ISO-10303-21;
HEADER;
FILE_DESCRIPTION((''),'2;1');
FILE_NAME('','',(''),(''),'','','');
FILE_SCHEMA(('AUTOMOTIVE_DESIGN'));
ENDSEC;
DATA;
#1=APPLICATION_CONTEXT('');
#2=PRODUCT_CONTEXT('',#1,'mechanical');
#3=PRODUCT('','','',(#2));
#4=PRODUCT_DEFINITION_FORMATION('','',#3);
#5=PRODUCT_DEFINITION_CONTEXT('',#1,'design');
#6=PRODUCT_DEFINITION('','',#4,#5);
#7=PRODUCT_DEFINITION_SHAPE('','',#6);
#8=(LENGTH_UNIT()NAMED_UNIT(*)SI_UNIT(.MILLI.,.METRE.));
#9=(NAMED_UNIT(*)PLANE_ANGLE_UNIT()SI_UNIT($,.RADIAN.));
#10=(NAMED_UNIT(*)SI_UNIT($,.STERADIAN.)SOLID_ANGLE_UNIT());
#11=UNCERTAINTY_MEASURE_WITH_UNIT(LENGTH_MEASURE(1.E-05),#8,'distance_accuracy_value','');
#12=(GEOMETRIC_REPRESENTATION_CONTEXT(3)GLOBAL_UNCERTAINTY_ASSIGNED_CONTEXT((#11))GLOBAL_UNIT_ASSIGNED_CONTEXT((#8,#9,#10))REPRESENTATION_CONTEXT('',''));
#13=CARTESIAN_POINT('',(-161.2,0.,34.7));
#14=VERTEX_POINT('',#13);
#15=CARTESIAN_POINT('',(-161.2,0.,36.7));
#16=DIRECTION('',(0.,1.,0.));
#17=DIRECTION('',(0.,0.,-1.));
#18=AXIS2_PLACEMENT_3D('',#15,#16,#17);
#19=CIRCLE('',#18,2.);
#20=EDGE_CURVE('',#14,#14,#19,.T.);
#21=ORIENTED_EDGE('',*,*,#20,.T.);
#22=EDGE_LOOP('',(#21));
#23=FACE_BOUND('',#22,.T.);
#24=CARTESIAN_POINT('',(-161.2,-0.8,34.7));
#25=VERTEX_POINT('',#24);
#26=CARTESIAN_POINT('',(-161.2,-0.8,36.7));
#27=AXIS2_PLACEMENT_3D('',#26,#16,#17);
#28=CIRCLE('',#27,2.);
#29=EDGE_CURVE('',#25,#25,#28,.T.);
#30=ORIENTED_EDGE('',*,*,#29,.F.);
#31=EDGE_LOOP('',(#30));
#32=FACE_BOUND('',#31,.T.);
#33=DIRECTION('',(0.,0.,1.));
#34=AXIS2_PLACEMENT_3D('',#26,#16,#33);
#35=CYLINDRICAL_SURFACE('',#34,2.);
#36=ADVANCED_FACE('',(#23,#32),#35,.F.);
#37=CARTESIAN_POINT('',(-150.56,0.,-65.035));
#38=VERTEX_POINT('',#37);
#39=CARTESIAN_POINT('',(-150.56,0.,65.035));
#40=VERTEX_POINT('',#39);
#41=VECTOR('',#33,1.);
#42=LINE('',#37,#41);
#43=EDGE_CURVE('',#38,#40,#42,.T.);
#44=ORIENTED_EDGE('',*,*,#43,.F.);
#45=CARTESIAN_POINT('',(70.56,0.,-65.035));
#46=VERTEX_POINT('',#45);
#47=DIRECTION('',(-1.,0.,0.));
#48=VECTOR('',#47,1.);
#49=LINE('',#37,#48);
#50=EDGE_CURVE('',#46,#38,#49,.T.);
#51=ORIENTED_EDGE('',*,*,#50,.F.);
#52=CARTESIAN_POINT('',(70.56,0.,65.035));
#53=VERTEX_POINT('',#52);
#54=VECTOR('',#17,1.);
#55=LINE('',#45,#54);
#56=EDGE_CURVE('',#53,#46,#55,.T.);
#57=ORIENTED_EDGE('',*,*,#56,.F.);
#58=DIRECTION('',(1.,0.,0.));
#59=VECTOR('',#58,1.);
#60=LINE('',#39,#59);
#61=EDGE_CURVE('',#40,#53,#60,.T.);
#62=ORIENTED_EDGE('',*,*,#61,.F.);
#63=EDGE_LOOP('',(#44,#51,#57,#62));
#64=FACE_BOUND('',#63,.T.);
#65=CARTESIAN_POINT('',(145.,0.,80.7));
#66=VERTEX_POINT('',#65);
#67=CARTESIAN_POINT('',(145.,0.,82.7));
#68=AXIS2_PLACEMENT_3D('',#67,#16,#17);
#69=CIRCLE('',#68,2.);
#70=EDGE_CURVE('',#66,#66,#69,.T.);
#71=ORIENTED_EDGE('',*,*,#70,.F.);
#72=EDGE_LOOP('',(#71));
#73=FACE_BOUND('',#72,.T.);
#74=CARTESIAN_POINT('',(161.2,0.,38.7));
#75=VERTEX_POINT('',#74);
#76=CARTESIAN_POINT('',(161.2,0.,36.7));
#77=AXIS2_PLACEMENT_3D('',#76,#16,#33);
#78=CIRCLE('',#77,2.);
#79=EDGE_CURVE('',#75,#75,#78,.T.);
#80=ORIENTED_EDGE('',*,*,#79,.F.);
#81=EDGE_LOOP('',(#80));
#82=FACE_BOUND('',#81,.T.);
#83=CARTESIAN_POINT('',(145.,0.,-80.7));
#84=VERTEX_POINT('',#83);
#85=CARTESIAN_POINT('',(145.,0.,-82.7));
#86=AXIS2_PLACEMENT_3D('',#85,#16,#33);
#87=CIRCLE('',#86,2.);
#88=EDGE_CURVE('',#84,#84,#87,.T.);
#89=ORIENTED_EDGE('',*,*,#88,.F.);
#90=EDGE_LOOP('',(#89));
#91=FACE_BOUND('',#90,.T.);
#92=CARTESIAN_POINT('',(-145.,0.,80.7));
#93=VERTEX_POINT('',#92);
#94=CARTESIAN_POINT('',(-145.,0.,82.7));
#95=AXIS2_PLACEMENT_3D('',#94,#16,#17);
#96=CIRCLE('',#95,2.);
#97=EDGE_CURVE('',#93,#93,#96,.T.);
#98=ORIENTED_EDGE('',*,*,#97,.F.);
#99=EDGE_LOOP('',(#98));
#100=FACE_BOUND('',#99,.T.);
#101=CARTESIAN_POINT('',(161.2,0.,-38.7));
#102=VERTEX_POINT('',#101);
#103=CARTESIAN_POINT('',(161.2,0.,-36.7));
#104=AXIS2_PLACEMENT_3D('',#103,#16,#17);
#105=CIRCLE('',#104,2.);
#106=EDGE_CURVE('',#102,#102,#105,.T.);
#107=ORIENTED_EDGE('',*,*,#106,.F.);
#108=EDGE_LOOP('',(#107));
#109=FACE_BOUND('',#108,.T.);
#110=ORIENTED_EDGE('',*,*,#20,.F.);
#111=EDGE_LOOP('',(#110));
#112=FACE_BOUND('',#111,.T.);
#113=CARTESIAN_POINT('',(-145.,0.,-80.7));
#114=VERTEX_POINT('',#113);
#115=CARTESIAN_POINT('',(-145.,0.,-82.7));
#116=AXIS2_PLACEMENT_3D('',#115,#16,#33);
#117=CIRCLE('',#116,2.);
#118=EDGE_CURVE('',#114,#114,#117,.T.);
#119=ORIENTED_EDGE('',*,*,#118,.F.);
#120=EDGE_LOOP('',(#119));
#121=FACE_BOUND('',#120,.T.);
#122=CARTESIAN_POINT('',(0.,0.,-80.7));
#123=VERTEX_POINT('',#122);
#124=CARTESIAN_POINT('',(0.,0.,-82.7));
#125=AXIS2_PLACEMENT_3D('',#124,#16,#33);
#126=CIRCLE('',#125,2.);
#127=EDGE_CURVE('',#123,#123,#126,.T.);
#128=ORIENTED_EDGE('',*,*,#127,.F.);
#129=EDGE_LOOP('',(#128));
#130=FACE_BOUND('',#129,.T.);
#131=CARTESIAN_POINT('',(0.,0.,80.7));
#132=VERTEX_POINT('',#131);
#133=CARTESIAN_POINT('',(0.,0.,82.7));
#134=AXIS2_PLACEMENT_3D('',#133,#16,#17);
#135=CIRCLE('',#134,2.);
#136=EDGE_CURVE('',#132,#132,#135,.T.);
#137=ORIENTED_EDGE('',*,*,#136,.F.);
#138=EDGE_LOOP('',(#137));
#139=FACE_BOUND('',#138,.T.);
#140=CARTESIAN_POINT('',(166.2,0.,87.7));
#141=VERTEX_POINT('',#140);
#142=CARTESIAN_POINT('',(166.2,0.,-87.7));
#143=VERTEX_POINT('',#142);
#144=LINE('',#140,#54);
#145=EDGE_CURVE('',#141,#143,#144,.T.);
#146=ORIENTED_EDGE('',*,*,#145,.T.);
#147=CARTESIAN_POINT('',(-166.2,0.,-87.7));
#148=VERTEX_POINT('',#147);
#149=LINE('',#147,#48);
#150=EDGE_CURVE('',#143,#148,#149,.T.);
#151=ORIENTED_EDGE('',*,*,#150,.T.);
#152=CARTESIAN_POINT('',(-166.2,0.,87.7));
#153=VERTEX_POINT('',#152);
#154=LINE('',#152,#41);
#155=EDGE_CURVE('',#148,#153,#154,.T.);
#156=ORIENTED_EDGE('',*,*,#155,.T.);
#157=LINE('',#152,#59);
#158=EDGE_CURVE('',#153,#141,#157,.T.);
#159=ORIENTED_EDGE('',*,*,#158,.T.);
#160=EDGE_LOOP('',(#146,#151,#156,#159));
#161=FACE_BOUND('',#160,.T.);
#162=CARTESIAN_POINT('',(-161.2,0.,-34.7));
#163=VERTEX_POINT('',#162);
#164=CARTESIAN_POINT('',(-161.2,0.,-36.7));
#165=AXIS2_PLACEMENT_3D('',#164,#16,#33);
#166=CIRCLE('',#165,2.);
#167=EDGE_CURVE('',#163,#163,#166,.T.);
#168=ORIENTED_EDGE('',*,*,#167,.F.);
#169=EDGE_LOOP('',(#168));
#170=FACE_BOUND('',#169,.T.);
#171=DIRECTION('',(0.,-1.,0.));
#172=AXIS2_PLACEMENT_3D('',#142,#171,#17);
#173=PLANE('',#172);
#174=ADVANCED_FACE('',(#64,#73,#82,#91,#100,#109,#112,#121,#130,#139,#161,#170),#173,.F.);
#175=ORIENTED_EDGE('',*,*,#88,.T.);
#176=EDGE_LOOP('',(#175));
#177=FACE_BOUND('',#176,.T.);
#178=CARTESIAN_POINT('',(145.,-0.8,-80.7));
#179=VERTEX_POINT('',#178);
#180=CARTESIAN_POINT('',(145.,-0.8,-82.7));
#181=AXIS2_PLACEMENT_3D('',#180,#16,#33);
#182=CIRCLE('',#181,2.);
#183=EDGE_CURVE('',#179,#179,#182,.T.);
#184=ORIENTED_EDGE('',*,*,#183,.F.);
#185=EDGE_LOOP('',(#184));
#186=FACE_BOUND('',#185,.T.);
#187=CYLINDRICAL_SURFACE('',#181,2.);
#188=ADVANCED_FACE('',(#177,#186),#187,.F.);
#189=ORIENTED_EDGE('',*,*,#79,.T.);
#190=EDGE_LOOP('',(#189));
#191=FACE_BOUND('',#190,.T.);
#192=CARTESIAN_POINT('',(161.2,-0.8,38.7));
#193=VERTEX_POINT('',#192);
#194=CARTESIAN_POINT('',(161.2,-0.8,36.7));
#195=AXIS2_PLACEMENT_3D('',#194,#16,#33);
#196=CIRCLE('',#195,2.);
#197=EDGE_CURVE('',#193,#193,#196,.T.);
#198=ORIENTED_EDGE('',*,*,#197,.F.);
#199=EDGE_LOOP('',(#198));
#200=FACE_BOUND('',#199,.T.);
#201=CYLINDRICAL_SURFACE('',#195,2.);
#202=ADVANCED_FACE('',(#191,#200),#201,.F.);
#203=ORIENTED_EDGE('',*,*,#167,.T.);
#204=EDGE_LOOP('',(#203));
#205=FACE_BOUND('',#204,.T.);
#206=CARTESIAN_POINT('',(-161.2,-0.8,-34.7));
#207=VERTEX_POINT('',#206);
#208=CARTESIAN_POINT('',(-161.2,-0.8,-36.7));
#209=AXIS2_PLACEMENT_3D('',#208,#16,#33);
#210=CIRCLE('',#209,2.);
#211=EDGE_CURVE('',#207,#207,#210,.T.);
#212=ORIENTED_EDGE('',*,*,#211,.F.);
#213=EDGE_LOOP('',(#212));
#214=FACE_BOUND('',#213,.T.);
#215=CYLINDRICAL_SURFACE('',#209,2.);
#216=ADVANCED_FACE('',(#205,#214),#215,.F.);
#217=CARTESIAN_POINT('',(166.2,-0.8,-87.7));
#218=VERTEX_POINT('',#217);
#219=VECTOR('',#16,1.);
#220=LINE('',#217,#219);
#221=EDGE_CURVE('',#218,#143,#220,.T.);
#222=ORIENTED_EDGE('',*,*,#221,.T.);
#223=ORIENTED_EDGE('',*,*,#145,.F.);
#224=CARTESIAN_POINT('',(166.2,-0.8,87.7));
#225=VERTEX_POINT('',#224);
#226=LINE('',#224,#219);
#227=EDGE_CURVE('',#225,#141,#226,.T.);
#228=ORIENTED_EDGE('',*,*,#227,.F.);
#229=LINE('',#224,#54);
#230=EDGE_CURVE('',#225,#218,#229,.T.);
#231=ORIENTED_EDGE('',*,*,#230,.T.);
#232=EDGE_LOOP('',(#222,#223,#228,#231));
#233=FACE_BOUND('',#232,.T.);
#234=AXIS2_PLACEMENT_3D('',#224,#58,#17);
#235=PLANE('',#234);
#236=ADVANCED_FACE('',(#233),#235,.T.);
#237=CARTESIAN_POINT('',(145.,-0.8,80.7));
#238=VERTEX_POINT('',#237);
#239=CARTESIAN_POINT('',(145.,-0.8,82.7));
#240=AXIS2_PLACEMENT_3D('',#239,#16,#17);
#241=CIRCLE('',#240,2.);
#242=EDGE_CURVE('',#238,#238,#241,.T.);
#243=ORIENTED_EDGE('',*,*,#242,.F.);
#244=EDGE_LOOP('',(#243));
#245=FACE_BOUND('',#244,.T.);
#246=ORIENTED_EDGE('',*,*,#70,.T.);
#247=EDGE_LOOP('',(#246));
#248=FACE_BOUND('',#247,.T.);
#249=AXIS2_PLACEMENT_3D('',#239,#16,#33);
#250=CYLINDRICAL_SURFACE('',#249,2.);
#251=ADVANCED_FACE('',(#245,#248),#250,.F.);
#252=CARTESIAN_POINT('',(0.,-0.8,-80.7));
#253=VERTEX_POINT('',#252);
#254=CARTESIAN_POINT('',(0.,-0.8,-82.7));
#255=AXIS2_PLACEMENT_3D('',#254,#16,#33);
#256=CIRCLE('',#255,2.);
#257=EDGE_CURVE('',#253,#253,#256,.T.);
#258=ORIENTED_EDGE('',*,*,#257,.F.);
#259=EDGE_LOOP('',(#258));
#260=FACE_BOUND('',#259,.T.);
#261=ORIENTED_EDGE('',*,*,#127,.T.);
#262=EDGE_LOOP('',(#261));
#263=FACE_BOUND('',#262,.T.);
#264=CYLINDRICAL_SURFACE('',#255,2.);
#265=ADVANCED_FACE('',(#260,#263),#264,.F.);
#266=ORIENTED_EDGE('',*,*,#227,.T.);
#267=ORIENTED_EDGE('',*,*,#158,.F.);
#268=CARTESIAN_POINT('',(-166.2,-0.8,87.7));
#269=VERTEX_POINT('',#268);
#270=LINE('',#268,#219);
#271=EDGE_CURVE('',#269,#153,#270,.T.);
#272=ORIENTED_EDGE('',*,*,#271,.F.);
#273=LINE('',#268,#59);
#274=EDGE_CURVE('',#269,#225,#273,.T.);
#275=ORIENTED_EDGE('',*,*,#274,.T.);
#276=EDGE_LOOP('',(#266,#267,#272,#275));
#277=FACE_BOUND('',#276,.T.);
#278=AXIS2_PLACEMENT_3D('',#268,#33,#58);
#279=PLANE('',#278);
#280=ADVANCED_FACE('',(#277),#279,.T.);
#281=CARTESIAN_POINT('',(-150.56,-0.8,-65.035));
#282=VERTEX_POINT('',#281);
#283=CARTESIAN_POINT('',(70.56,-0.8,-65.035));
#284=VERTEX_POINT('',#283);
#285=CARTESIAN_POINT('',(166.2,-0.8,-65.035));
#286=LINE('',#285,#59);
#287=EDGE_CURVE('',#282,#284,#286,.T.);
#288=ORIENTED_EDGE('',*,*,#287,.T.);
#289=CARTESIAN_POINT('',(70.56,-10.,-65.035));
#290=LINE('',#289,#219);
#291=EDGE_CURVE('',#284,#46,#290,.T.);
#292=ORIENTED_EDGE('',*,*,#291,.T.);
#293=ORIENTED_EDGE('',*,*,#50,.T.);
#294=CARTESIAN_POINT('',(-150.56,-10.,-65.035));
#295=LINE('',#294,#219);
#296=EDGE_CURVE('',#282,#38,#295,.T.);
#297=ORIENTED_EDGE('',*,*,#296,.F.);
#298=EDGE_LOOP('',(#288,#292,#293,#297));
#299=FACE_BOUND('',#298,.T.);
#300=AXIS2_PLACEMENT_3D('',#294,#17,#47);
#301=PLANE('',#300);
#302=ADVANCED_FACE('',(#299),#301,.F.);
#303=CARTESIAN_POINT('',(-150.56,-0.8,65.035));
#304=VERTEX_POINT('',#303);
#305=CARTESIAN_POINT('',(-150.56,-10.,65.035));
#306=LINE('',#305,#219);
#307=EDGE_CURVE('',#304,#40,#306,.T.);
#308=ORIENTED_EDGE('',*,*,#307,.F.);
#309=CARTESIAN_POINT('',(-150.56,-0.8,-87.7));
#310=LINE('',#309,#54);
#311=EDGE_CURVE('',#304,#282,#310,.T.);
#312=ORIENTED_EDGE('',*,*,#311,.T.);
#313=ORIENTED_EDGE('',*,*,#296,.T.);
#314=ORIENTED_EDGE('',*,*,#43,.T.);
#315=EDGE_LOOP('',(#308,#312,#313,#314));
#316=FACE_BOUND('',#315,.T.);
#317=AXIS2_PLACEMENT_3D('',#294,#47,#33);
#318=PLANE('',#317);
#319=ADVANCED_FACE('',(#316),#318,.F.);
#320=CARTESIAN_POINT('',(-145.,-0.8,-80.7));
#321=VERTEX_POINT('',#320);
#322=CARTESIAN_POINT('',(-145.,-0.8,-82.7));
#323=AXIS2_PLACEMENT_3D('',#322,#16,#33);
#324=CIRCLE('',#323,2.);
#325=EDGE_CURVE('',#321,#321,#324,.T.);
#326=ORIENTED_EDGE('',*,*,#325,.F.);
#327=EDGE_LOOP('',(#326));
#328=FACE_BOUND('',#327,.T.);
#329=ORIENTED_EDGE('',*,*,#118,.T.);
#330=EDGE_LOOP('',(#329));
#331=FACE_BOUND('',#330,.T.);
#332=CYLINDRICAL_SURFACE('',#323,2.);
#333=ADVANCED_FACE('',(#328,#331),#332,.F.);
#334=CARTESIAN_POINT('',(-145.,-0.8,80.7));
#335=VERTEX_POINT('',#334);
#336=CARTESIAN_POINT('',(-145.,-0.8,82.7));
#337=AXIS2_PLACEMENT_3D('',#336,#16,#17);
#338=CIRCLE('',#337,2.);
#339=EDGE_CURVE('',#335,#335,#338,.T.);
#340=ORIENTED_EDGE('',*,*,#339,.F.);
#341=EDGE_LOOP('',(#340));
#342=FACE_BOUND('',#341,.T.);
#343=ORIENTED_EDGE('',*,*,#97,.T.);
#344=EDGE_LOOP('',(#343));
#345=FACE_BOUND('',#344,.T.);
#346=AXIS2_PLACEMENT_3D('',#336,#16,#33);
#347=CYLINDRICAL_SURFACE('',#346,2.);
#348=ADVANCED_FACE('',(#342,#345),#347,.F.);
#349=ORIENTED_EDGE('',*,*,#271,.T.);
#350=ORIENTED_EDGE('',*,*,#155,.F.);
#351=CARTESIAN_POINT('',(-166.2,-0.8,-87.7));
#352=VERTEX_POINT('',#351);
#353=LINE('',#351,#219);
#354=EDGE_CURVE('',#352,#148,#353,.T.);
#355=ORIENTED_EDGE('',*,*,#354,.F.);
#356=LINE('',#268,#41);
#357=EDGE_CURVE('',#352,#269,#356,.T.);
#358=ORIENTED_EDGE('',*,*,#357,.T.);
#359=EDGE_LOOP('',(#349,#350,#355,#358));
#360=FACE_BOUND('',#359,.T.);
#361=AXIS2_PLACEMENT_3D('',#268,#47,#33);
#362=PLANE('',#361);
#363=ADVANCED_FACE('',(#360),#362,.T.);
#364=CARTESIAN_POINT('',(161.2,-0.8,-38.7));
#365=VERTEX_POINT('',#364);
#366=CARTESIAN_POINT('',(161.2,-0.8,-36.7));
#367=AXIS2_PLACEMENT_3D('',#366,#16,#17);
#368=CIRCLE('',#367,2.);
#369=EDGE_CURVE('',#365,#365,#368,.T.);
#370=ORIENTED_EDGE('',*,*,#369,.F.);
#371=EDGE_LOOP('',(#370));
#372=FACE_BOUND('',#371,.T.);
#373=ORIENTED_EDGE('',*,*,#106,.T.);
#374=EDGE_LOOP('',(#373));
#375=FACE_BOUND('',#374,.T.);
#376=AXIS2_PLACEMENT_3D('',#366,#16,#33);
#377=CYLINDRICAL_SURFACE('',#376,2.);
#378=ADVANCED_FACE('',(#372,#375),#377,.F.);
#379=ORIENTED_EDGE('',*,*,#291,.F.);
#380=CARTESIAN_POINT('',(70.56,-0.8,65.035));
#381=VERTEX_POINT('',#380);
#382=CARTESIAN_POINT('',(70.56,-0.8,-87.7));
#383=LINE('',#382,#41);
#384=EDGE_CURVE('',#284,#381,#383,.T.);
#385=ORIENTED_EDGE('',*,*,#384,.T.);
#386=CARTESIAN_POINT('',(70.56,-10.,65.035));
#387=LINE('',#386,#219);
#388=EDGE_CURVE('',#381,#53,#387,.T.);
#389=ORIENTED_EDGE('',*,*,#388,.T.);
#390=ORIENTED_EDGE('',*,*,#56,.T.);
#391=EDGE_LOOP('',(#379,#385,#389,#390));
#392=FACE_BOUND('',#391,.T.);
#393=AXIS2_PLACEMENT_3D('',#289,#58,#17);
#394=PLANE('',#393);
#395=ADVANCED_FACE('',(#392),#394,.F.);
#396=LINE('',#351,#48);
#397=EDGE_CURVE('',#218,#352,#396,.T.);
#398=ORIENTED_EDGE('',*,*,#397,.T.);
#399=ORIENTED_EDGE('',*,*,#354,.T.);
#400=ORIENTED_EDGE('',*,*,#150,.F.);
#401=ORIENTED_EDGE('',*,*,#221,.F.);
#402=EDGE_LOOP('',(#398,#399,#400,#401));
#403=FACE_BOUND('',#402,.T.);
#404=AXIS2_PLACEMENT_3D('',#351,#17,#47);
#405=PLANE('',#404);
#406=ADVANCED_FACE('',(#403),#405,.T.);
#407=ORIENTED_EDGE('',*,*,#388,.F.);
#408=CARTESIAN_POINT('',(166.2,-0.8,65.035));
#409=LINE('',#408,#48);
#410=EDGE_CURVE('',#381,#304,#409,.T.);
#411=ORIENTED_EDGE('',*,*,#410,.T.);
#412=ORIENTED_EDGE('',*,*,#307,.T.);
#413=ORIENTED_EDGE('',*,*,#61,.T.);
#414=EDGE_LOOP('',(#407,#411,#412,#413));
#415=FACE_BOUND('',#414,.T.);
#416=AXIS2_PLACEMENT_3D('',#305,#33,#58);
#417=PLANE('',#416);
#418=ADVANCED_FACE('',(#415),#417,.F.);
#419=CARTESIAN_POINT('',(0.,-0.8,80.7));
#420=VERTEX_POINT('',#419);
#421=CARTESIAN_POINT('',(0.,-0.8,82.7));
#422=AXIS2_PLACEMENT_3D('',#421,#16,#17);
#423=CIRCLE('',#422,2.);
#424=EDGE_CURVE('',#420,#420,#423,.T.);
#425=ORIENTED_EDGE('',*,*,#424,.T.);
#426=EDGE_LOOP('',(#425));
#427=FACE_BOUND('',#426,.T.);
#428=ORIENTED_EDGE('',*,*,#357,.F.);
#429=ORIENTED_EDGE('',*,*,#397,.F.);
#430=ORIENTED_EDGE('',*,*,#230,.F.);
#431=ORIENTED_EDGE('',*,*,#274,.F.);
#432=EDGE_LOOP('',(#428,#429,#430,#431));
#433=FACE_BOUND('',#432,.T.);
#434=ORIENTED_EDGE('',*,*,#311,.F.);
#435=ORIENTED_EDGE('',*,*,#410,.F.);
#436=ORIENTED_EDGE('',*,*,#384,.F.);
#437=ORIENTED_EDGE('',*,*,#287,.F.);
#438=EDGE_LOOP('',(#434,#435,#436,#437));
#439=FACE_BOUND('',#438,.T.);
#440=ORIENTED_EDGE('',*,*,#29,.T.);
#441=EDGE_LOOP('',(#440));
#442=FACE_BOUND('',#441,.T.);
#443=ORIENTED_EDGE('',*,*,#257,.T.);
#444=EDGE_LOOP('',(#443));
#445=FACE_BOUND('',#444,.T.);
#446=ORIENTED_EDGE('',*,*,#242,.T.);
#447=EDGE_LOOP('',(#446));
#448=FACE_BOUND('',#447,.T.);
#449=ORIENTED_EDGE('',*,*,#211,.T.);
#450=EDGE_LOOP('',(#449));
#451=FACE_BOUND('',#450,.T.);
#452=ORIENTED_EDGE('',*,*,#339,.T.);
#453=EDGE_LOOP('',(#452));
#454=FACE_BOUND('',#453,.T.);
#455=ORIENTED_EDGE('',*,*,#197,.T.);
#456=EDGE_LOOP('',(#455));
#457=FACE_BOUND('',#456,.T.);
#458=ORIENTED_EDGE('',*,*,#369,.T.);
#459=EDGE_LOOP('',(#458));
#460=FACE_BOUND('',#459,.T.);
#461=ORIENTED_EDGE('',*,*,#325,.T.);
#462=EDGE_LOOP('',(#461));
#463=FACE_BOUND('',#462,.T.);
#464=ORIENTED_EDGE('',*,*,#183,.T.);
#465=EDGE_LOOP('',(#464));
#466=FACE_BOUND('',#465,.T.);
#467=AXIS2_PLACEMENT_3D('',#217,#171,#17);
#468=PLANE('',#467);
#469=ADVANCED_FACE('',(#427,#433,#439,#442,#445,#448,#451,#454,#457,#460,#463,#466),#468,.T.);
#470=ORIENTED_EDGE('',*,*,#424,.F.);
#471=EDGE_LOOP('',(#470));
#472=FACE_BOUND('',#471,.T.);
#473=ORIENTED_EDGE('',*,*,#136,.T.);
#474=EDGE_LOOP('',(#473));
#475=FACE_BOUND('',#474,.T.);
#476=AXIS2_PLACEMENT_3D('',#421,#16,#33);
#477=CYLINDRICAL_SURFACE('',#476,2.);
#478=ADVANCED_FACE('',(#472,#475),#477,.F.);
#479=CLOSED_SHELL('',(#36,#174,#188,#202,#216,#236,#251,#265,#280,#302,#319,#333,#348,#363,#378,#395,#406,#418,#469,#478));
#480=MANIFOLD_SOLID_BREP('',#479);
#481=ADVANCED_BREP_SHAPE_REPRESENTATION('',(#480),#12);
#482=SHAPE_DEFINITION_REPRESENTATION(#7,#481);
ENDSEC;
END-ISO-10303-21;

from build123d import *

# Parameters (mm, degrees)
SKETCH1_W          = 332.4
SKETCH1_H          = 175.4
SKETCH1_R          = 2
BASE_FLANGE1_DEPTH = 0.8
SKETCH2_W          = 221.12
SKETCH2_H          = 130.07
CUT_EXTRUDE1_DEPTH = 10


# Sheet-metal steps are written as plain solids
with BuildPart() as part:
    # Sketch1 → Base-Flange1 (new body)
    with BuildSketch(Plane(origin=(0, 0, 0), x_dir=(1, 0, 0), z_dir=(0, 1, 0))):
        Rectangle(SKETCH1_W, SKETCH1_H)
        with Locations(Location((0, 82.7, 0), (0, 0, 270))):
            Circle(SKETCH1_R, mode=Mode.SUBTRACT)
        with Locations(Location((145, 82.7, 0), (0, 0, 270))):
            Circle(SKETCH1_R, mode=Mode.SUBTRACT)
        with Locations(Location((-145, 82.7, 0), (0, 0, 270))):
            Circle(SKETCH1_R, mode=Mode.SUBTRACT)
        with Locations(Location((-161.2, 36.7, 0), (0, 0, 270))):
            Circle(SKETCH1_R, mode=Mode.SUBTRACT)
        with Locations(Location((161.2, 36.7, 0), (0, 0, 90))):
            Circle(SKETCH1_R, mode=Mode.SUBTRACT)
        with Locations(Location((161.2, -36.7, 0), (0, 0, 270))):
            Circle(SKETCH1_R, mode=Mode.SUBTRACT)
        with Locations(Location((145, -82.7, 0), (0, 0, 90))):
            Circle(SKETCH1_R, mode=Mode.SUBTRACT)
        with Locations(Location((0, -82.7, 0), (0, 0, 90))):
            Circle(SKETCH1_R, mode=Mode.SUBTRACT)
        with Locations(Location((-145, -82.7, 0), (0, 0, 90))):
            Circle(SKETCH1_R, mode=Mode.SUBTRACT)
        with Locations(Location((-161.2, -36.7, 0), (0, 0, 90))):
            Circle(SKETCH1_R, mode=Mode.SUBTRACT)
    extrude(amount=-BASE_FLANGE1_DEPTH)

    # Sketch2 → Cut-Extrude1 (cut)
    with BuildSketch(Plane(origin=(0, 0, 0), x_dir=(1, 0, 0), z_dir=(0, 1, 0))):
        with Locations((-40, 0)):
            Rectangle(SKETCH2_W, SKETCH2_H)
    extrude(amount=-CUT_EXTRUDE1_DEPTH, mode=Mode.SUBTRACT)


solid = part.part
